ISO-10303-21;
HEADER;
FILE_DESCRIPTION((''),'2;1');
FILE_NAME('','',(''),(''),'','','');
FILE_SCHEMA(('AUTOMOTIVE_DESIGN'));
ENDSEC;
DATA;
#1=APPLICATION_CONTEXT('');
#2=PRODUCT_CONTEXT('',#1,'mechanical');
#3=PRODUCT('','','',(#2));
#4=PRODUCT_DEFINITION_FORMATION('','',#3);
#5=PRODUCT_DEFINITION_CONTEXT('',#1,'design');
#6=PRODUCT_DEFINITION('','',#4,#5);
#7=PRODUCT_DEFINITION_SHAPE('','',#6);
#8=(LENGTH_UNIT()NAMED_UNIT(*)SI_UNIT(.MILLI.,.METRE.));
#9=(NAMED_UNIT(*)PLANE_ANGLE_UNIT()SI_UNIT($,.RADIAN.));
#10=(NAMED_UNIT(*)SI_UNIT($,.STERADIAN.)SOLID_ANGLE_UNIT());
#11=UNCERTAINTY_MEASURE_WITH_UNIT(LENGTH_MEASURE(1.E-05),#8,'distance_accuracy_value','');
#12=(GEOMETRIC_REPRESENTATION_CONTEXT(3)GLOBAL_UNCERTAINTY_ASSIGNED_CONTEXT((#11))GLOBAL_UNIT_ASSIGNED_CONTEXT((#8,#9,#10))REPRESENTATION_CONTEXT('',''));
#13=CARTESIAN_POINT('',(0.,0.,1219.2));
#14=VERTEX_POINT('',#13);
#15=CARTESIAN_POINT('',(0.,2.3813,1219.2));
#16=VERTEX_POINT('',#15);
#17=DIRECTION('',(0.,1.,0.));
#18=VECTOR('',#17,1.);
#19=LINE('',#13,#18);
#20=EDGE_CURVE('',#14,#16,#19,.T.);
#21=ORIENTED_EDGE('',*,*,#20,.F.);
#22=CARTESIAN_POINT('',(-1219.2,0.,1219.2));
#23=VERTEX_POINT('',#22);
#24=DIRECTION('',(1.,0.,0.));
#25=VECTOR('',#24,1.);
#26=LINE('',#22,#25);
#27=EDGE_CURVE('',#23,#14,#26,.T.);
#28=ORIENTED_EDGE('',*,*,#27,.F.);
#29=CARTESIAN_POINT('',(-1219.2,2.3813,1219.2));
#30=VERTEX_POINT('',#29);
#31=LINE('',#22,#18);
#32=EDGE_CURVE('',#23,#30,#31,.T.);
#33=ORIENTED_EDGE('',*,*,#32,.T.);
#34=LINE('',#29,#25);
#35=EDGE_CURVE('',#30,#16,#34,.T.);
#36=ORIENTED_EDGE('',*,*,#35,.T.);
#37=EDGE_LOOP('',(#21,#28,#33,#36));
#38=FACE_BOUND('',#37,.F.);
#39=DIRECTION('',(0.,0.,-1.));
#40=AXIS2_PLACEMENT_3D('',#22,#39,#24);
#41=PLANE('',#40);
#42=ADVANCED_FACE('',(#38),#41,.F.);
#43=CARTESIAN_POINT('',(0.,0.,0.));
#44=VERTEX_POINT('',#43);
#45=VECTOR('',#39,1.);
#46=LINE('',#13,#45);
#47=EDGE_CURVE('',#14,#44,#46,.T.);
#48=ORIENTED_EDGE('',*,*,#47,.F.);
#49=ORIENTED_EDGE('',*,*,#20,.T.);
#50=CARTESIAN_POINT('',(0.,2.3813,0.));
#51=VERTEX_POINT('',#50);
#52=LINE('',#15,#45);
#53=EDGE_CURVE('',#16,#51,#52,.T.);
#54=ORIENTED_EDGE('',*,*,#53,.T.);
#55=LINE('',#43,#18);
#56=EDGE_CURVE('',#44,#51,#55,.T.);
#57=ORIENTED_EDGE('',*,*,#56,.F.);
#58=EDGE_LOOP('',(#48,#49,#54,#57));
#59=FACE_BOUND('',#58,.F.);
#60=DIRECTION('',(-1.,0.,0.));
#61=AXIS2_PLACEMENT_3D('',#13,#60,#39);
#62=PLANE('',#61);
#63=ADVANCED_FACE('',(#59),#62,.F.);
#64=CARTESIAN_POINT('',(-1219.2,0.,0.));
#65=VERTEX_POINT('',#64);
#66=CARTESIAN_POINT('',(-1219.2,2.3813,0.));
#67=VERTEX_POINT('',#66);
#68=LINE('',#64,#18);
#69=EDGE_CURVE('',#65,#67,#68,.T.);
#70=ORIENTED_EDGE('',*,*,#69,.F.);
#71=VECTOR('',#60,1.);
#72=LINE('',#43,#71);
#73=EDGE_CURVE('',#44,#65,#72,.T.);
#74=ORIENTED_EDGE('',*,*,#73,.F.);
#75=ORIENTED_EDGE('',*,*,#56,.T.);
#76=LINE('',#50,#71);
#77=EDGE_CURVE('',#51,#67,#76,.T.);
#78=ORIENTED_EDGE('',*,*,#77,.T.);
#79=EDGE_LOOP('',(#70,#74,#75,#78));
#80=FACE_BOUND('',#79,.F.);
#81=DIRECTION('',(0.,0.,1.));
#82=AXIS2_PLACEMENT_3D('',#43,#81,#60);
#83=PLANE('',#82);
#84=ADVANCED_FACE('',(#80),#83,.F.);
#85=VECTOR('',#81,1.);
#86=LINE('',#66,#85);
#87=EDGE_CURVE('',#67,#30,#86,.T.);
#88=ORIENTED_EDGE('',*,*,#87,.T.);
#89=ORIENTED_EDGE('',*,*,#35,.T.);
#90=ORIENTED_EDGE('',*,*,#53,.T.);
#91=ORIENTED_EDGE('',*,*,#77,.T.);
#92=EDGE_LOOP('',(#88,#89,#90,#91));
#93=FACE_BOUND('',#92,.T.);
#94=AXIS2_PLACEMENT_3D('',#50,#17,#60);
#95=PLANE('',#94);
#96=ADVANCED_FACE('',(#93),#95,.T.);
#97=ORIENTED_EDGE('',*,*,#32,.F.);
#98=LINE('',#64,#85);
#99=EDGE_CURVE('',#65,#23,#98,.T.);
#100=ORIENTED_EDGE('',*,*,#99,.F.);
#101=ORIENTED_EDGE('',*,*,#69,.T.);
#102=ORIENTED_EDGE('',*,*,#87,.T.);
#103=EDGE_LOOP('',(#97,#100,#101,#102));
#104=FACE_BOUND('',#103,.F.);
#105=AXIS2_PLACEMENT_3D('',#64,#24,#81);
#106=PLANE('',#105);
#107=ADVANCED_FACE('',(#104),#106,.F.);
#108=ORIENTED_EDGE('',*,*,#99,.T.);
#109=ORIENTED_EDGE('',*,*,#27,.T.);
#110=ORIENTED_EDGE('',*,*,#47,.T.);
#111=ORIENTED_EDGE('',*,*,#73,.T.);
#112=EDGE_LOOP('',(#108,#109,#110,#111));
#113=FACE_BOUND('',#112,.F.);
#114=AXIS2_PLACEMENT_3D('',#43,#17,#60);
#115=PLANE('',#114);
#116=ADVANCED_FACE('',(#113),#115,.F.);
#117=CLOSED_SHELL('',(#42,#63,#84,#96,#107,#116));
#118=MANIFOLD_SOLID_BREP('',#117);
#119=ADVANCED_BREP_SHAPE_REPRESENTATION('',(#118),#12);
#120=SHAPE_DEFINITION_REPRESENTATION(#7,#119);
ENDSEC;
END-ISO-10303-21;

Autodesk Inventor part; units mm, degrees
ref_plane "YZ Plane" through (0, 0, 0) normal (1, 0, 0) x (0, 1, 0)
ref_plane "XZ Plane" through (0, 0, 0) normal (0, 1, 0) x (-1, 0, 0)
ref_plane "XY Plane" through (0, 0, 0) normal (0, 0, 1) x (1, 0, 0)
sketch "Sketch1" plane through (0, 0, 0) normal (0, 1, 0) x (-1, 0, 0)
  line L0 (0, 0) -> (1219.2, 0)
  line L1 (1219.2, 0) -> (1219.2, 1219.2)
  line L2 (1219.2, 1219.2) -> (0, 1219.2)
  line L3 (0, 1219.2) -> (0, 0)
  dimension "d0" = 1219.2
  dimension "d1" = 1219.2
extrude "Plate1" add sketch "Sketch1" along normal blind 2.3813
equation "\"BendRadius\" = Thickness"
equation "\"BendReliefWidth\" = Thickness"
equation "\"BendReliefDepth\" = 0.5 * Thickness"
equation "\"CornerReliefSize\" = 4 * Thickness"
equation "\"MinimumRemnant\" = 2 * Thickness"
equation "\"TransitionRadius\" = BendRadius"
equation "\"JacobiRadiusSize\" = BendRadius"
equation "\"GapSize\" = Thickness"
equation "\"d2\" = BendRadius"
equation "\"Thickness\" = 2.38125"
properties part number "tableBottom" material "Aluminum 6061"
